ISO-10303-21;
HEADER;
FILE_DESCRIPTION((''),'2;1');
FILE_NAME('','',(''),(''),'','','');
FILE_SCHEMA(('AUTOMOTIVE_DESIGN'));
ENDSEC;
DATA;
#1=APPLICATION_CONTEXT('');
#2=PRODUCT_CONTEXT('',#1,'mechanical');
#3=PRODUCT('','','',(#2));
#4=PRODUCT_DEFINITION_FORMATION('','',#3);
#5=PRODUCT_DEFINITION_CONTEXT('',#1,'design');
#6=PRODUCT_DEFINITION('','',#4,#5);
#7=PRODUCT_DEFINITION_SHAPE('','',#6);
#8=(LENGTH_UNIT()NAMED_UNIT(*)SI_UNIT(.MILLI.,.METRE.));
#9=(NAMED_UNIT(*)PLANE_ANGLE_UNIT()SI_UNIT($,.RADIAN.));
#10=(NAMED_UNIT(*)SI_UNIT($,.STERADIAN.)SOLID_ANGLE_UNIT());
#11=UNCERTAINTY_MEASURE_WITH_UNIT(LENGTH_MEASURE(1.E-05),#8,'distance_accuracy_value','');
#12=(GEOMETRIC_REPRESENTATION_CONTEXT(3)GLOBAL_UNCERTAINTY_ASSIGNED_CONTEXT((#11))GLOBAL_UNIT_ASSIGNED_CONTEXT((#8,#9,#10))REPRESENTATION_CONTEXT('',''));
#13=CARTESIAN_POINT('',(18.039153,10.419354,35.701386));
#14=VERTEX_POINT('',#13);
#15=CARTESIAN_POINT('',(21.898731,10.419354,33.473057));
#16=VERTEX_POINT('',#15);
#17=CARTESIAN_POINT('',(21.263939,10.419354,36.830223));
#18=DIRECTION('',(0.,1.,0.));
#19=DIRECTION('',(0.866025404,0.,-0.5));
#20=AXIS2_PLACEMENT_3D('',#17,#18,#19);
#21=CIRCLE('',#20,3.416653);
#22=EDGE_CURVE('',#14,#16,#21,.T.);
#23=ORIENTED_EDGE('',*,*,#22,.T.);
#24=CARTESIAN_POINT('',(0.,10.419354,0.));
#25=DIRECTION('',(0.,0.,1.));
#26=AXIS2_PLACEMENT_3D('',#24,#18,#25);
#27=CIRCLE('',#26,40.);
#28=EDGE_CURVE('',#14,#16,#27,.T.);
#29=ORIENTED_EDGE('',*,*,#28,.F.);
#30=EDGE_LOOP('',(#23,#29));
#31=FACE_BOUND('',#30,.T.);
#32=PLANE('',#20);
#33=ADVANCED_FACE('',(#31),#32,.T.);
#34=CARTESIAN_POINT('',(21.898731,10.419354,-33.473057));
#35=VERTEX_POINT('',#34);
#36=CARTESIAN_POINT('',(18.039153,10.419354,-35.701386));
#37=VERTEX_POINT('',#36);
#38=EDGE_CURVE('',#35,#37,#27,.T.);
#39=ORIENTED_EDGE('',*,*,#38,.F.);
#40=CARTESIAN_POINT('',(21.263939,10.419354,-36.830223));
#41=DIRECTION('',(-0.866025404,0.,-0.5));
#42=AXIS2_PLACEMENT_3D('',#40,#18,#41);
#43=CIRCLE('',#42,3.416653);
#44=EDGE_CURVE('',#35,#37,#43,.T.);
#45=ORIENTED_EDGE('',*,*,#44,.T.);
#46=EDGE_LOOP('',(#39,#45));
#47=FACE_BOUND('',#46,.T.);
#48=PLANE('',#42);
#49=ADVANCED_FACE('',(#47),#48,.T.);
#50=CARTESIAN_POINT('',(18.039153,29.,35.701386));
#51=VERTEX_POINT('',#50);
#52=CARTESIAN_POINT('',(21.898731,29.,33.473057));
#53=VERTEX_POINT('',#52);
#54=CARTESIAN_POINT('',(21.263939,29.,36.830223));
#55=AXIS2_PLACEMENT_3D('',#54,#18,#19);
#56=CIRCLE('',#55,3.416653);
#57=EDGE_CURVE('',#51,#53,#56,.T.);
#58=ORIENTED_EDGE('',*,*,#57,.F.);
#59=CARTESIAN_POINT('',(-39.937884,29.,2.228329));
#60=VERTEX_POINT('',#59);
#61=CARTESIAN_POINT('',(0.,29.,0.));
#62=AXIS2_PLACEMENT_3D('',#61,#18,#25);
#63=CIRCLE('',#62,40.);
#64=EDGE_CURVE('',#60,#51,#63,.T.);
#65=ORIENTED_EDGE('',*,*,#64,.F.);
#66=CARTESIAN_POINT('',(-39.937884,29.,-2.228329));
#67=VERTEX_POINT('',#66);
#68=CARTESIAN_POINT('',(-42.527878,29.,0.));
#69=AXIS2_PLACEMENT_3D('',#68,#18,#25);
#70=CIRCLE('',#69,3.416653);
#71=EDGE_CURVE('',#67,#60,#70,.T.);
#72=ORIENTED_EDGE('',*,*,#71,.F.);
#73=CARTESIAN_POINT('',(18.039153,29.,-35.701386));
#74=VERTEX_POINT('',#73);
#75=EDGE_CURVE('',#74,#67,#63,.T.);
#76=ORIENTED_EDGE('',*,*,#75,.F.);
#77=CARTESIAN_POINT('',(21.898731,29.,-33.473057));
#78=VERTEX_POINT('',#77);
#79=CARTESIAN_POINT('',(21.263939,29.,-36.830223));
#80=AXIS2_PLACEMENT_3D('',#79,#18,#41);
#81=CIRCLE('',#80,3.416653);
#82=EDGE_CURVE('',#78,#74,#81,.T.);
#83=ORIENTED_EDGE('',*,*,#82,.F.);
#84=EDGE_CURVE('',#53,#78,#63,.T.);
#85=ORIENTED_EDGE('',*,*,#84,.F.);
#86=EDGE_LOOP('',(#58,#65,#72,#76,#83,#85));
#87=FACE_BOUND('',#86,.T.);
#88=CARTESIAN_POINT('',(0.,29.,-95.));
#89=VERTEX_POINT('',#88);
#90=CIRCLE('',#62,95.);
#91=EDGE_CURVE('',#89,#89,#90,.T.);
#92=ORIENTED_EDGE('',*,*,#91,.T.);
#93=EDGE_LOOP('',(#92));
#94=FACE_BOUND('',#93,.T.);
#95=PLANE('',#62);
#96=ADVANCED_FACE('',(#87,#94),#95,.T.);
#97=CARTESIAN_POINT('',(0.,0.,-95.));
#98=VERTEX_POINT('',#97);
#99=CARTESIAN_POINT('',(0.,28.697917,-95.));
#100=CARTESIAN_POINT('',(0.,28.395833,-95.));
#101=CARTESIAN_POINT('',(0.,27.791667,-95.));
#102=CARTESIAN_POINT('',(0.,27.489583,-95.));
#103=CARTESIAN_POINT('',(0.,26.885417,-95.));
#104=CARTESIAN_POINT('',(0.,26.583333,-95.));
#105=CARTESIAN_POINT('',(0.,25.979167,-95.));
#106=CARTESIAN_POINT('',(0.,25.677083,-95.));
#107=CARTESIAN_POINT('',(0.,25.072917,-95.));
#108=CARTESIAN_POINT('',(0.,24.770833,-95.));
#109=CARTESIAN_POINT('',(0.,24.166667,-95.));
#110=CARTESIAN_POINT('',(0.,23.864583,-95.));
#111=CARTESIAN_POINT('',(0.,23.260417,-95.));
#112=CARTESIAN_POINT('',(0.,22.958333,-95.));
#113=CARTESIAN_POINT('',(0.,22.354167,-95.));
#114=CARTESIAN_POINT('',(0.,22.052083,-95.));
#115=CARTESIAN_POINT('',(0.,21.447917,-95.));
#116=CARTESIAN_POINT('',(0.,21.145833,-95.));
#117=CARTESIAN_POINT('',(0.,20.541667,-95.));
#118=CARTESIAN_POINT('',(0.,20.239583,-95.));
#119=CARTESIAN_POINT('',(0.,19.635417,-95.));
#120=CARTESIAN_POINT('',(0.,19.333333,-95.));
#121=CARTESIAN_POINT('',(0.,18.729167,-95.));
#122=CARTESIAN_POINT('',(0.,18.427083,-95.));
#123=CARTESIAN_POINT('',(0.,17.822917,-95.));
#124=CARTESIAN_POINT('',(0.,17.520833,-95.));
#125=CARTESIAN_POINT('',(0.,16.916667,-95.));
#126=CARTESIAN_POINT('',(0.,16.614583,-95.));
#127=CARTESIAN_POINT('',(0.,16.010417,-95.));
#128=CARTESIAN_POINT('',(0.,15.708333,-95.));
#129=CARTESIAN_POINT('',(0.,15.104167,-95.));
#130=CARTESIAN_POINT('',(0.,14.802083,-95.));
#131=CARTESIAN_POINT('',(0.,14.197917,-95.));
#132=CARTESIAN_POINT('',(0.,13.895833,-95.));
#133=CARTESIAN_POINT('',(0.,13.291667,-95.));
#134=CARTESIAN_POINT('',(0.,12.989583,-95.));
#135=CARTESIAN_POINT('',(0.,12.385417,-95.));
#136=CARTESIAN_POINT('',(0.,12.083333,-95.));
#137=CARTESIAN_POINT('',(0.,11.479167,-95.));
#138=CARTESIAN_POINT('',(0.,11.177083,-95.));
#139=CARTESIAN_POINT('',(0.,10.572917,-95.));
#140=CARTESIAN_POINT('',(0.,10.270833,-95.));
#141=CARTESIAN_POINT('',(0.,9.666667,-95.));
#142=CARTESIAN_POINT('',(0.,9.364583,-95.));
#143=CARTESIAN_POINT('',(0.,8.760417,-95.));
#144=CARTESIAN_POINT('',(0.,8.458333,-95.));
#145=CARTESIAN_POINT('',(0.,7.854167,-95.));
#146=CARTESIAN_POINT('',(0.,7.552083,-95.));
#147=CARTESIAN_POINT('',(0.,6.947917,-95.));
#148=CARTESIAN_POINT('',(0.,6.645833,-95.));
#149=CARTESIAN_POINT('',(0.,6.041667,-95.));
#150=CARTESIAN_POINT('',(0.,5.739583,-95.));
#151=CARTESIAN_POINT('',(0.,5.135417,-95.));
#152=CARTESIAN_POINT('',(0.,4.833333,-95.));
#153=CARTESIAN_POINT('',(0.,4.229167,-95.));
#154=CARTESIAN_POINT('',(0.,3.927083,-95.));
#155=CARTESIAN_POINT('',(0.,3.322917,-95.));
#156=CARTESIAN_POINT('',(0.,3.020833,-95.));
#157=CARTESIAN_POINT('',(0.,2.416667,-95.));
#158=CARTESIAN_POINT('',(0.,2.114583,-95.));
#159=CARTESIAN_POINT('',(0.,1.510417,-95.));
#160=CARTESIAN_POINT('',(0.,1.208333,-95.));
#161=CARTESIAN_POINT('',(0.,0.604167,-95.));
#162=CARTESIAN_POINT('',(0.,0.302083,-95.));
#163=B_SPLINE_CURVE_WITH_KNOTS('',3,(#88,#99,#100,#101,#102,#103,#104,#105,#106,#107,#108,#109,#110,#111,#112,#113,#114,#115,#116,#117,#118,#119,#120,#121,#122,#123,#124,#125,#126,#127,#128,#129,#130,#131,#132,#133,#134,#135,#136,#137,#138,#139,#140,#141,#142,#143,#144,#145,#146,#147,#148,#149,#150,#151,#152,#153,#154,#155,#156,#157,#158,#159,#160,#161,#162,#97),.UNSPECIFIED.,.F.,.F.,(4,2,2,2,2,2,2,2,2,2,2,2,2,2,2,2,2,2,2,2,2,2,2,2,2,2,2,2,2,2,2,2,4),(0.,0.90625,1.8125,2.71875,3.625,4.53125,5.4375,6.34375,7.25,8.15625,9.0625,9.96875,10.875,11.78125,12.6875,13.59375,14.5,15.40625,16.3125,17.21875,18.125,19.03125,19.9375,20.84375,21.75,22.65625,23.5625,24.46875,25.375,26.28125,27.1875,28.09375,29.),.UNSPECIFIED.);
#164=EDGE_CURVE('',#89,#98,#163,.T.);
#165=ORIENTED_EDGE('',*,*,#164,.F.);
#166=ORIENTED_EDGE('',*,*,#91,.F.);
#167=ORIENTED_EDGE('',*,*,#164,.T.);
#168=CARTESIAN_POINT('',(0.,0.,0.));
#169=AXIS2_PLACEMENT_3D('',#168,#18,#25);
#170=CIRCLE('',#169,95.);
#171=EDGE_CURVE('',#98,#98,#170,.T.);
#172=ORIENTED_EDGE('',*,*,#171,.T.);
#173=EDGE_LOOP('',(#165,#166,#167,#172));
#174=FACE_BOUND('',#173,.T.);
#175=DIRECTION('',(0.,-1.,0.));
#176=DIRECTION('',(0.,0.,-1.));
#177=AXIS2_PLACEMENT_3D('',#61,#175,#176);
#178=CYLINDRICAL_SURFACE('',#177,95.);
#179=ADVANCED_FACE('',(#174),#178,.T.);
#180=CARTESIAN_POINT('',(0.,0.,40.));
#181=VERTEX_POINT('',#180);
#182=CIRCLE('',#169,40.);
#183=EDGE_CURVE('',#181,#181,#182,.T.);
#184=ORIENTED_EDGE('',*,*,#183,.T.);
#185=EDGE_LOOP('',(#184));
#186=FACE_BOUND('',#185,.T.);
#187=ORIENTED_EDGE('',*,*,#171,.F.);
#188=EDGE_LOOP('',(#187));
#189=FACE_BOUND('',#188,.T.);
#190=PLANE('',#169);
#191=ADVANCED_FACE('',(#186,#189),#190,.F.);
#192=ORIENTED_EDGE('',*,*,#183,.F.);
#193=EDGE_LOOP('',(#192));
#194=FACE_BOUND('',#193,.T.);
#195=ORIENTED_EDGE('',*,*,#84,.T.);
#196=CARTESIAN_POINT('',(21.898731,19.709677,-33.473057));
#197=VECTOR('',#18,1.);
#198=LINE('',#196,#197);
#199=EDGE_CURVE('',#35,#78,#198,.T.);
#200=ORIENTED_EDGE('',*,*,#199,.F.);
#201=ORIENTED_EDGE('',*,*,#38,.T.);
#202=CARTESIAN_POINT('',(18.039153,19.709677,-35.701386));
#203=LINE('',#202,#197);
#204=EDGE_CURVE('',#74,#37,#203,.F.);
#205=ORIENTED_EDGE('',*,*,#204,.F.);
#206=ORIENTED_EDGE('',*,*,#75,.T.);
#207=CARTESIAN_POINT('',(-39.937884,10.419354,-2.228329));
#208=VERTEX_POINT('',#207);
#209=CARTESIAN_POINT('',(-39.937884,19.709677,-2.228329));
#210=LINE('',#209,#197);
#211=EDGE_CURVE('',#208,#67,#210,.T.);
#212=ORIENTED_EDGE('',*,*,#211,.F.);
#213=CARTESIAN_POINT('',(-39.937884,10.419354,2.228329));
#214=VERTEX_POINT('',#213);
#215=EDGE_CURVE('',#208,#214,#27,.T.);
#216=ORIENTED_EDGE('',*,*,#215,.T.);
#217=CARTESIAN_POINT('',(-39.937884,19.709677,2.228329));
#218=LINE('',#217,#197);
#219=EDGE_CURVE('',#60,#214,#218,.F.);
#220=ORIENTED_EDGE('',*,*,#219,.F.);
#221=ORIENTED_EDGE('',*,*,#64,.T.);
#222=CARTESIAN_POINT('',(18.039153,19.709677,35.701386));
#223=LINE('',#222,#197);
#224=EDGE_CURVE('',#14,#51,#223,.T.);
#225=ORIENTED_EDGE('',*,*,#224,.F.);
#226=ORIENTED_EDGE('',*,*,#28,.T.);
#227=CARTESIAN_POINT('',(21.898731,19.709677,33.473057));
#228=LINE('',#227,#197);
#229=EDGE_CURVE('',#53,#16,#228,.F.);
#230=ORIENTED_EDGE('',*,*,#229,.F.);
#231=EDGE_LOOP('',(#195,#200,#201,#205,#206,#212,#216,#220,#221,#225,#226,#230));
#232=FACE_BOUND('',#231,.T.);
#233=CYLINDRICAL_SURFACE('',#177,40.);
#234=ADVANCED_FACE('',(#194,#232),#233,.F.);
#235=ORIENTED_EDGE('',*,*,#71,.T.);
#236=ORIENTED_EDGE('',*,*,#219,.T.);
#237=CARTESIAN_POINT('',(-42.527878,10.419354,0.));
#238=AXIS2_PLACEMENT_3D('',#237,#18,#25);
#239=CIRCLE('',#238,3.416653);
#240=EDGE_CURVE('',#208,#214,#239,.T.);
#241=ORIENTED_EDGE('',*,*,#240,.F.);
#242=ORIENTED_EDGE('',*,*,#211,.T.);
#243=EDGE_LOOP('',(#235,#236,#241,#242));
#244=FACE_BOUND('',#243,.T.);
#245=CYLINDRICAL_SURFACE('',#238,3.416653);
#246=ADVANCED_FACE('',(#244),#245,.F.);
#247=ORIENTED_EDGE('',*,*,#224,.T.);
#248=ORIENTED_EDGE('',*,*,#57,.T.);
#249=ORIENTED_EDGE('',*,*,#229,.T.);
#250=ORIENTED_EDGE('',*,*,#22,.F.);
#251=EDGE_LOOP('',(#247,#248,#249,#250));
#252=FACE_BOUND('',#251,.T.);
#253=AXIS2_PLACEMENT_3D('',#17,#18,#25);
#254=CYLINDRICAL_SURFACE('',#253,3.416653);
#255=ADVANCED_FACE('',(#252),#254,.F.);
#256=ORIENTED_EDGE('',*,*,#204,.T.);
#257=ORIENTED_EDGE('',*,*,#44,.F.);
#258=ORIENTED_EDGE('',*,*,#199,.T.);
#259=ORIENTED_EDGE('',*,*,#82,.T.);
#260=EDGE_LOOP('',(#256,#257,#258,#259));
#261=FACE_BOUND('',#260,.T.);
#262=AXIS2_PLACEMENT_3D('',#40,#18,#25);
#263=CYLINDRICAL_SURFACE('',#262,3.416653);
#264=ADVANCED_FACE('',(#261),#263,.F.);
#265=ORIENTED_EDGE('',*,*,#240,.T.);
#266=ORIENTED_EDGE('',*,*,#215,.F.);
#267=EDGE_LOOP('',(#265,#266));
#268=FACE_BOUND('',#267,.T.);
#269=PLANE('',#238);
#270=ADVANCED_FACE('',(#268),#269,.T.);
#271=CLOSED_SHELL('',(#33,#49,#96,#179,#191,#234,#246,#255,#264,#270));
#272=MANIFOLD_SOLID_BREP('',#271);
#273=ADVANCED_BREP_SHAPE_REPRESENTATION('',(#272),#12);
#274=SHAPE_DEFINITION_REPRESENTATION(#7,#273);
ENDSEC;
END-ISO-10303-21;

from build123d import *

# Parameters (mm, degrees)
SKETCH1_R           = 95
BOSS_EXTRUDE1_DEPTH = 29
SKETCH2_R           = 40
CUT_EXTRUDE1_DEPTH  = 138.444534267
SKETCH3_R           = 3.416653433
CUT_EXTRUDE2_DEPTH  = 18.580646215
CIRPATTERN1_COUNT   = 3


with BuildPart() as part:
    # Sketch1 → Boss-Extrude1 (new body)
    with BuildSketch(Plane(origin=(0, 0, 0), x_dir=(1, 0, 0), z_dir=(0, 1, 0))):
        Circle(SKETCH1_R)
    extrude(amount=BOSS_EXTRUDE1_DEPTH)

    # Sketch2 → Cut-Extrude1 (cut, through all)
    with BuildSketch(Plane(origin=(0, 0, 0), x_dir=(1, 0, 0), z_dir=(0, 1, 0))):
        Circle(SKETCH2_R)
    extrude(amount=CUT_EXTRUDE1_DEPTH, mode=Mode.SUBTRACT)

    # Sketch3 → Cut-Extrude2 (cut)
    with BuildSketch(Plane(origin=(0, 29, 0), x_dir=(1, 0, 0), z_dir=(0, 1, 0))):
        with Locations((-42.527878276, 0)):
            Circle(SKETCH3_R)
    cut_extrude2 = extrude(amount=-CUT_EXTRUDE2_DEPTH, mode=Mode.SUBTRACT)

    # CirPattern1: Cut-Extrude2 ×3 about axis
    cirpattern1_axis = Axis((0, 0, 0), (0, 1, 0))
    for i in range(1, CIRPATTERN1_COUNT):
        add(cut_extrude2.rotate(cirpattern1_axis, i * 360 / CIRPATTERN1_COUNT), mode=Mode.SUBTRACT)


solid = part.part
